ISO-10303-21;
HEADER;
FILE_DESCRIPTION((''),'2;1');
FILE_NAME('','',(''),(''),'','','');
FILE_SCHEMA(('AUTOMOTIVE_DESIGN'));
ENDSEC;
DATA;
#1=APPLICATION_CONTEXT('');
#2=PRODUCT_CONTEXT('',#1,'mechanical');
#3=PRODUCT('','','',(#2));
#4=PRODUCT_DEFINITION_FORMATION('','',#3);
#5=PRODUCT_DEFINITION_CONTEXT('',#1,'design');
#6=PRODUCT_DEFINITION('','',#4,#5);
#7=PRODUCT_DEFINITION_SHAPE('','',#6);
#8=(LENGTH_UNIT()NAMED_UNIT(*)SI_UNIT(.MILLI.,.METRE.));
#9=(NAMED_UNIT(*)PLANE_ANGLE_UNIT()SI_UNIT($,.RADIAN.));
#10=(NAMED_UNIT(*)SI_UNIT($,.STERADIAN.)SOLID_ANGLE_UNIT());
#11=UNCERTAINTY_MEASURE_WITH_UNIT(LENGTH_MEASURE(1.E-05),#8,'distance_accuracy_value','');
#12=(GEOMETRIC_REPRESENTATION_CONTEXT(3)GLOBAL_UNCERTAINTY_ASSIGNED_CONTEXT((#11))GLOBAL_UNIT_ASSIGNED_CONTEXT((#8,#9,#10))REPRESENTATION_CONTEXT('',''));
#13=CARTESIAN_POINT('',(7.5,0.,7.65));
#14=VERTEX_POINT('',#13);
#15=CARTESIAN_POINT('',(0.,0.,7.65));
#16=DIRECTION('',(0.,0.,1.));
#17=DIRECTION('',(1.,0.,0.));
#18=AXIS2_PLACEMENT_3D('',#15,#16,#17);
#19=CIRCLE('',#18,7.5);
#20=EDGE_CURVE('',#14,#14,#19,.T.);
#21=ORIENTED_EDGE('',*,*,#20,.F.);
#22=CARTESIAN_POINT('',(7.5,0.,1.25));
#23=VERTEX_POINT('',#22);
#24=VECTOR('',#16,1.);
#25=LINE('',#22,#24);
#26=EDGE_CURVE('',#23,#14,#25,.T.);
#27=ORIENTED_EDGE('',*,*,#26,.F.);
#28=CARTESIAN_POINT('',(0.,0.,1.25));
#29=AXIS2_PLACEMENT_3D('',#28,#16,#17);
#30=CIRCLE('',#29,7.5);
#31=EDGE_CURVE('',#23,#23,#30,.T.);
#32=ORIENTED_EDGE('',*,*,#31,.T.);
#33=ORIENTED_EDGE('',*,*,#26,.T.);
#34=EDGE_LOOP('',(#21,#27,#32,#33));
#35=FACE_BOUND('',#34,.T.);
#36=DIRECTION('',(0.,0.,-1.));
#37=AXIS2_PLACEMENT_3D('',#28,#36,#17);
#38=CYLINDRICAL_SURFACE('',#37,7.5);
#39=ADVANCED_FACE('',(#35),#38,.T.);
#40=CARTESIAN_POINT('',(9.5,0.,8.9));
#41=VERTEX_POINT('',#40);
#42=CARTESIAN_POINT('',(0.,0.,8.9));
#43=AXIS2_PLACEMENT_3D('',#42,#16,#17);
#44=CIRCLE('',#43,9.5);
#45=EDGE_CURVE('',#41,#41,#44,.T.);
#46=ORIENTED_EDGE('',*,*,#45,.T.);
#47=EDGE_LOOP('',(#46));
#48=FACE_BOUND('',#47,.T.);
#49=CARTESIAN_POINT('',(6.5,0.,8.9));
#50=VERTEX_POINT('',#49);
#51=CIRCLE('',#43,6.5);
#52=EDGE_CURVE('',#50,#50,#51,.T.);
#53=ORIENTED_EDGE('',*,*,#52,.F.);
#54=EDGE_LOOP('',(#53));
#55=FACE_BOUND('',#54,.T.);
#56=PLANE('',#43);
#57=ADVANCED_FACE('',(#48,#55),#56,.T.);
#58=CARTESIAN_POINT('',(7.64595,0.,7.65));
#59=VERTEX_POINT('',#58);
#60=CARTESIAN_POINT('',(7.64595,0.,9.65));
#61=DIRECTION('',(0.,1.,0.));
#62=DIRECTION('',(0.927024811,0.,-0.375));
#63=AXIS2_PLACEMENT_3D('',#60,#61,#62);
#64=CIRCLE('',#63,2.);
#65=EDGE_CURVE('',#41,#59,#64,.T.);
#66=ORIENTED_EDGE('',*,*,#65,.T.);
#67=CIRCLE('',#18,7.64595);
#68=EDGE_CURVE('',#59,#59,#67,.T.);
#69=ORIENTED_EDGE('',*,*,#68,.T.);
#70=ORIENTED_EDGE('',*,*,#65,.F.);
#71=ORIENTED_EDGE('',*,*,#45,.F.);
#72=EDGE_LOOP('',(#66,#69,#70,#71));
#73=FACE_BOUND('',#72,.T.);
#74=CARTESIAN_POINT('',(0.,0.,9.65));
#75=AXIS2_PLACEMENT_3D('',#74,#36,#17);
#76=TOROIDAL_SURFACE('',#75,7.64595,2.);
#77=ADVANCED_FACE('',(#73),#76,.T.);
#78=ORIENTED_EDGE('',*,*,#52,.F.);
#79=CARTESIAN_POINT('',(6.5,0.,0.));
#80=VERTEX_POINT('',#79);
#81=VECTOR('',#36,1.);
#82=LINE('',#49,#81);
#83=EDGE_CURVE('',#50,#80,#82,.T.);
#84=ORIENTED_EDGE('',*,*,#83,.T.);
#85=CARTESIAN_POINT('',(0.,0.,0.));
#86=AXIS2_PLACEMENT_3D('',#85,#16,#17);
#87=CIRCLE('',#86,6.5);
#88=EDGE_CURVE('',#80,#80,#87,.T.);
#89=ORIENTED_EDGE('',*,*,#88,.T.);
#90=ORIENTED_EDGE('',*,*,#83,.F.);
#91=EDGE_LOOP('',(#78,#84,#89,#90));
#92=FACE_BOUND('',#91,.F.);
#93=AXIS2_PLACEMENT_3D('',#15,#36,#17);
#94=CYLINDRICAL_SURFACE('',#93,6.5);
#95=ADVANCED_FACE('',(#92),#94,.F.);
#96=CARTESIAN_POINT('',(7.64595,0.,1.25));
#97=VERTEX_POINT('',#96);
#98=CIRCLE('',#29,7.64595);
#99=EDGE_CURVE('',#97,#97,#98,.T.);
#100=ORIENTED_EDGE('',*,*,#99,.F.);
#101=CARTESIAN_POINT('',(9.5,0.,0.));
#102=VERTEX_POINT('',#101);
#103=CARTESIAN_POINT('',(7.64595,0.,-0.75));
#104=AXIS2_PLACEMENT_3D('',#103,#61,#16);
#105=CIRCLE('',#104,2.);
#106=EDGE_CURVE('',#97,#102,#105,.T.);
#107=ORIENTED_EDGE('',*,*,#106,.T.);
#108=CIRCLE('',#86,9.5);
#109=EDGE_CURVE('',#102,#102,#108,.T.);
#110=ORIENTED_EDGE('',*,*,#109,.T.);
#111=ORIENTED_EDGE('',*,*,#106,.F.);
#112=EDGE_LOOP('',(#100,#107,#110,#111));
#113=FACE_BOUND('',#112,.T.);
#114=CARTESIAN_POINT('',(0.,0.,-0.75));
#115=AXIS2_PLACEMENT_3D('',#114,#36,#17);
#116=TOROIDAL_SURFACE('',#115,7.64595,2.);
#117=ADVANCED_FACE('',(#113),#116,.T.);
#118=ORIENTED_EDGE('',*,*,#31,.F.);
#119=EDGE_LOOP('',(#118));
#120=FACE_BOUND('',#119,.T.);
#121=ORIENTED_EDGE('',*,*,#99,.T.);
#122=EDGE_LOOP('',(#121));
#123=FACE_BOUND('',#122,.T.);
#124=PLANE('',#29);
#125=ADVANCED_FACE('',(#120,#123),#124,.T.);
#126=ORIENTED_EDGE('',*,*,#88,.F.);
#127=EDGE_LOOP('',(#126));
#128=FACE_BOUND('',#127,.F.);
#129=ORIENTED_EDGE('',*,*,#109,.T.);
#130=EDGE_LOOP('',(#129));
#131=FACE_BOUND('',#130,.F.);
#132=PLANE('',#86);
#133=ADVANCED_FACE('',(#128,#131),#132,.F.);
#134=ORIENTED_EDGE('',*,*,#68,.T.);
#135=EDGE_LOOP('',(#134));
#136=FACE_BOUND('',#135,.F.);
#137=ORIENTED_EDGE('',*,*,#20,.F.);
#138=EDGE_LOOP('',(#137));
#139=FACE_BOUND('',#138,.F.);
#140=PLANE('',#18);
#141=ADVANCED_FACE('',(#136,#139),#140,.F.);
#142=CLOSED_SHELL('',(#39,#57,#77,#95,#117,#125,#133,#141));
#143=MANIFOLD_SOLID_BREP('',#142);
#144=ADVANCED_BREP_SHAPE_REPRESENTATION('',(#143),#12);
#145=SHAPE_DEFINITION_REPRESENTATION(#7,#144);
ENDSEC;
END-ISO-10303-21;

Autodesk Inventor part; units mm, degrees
ref_plane "YZ Plane" through (0, 0, 0) normal (1, 0, 0) x (0, 1, 0)
ref_plane "XZ Plane" through (0, 0, 0) normal (0, 1, 0) x (-1, 0, 0)
ref_plane "XY Plane" through (0, 0, 0) normal (0, 0, 1) x (1, 0, 0)
sketch "Skizze1" plane through (0, 0, 0) normal (0, 0, 1) x (1, 0, 0)
  circle A0 centre (0, 0) radius 6.5
  circle A1 centre (0, 0) radius 9.5
  dimension "d0" = 13
  dimension "d1" = 19
extrude "Extrusion1" add sketch "Skizze1" along normal blind 1.25
sketch "Skizze2" plane through (0, 0, 1.25) normal (0, 0, 1) x (1, 0, 0)
  circle A0 centre (0, 0) radius 6.5
  circle A1 centre (0, 0) radius 7.5
  dimension "d4" = 15
extrude "Extrusion2" add sketch "Skizze2" along normal blind 6.4
sketch "Skizze3" plane through (0, 0, 7.65) normal (0, 0, 1) x (1, 0, 0)
  circle A0 centre (0, 0) radius 6.5
  circle A1 centre (0, 0) radius 9.5
extrude "Extrusion3" add sketch "Skizze3" along normal blind 1.25
fillet "Rundung1" radius 2 2 edges at (-9.5, 0, 7.65) (-9.5, 0, 1.25)
properties part number "Prusa_pulley"
